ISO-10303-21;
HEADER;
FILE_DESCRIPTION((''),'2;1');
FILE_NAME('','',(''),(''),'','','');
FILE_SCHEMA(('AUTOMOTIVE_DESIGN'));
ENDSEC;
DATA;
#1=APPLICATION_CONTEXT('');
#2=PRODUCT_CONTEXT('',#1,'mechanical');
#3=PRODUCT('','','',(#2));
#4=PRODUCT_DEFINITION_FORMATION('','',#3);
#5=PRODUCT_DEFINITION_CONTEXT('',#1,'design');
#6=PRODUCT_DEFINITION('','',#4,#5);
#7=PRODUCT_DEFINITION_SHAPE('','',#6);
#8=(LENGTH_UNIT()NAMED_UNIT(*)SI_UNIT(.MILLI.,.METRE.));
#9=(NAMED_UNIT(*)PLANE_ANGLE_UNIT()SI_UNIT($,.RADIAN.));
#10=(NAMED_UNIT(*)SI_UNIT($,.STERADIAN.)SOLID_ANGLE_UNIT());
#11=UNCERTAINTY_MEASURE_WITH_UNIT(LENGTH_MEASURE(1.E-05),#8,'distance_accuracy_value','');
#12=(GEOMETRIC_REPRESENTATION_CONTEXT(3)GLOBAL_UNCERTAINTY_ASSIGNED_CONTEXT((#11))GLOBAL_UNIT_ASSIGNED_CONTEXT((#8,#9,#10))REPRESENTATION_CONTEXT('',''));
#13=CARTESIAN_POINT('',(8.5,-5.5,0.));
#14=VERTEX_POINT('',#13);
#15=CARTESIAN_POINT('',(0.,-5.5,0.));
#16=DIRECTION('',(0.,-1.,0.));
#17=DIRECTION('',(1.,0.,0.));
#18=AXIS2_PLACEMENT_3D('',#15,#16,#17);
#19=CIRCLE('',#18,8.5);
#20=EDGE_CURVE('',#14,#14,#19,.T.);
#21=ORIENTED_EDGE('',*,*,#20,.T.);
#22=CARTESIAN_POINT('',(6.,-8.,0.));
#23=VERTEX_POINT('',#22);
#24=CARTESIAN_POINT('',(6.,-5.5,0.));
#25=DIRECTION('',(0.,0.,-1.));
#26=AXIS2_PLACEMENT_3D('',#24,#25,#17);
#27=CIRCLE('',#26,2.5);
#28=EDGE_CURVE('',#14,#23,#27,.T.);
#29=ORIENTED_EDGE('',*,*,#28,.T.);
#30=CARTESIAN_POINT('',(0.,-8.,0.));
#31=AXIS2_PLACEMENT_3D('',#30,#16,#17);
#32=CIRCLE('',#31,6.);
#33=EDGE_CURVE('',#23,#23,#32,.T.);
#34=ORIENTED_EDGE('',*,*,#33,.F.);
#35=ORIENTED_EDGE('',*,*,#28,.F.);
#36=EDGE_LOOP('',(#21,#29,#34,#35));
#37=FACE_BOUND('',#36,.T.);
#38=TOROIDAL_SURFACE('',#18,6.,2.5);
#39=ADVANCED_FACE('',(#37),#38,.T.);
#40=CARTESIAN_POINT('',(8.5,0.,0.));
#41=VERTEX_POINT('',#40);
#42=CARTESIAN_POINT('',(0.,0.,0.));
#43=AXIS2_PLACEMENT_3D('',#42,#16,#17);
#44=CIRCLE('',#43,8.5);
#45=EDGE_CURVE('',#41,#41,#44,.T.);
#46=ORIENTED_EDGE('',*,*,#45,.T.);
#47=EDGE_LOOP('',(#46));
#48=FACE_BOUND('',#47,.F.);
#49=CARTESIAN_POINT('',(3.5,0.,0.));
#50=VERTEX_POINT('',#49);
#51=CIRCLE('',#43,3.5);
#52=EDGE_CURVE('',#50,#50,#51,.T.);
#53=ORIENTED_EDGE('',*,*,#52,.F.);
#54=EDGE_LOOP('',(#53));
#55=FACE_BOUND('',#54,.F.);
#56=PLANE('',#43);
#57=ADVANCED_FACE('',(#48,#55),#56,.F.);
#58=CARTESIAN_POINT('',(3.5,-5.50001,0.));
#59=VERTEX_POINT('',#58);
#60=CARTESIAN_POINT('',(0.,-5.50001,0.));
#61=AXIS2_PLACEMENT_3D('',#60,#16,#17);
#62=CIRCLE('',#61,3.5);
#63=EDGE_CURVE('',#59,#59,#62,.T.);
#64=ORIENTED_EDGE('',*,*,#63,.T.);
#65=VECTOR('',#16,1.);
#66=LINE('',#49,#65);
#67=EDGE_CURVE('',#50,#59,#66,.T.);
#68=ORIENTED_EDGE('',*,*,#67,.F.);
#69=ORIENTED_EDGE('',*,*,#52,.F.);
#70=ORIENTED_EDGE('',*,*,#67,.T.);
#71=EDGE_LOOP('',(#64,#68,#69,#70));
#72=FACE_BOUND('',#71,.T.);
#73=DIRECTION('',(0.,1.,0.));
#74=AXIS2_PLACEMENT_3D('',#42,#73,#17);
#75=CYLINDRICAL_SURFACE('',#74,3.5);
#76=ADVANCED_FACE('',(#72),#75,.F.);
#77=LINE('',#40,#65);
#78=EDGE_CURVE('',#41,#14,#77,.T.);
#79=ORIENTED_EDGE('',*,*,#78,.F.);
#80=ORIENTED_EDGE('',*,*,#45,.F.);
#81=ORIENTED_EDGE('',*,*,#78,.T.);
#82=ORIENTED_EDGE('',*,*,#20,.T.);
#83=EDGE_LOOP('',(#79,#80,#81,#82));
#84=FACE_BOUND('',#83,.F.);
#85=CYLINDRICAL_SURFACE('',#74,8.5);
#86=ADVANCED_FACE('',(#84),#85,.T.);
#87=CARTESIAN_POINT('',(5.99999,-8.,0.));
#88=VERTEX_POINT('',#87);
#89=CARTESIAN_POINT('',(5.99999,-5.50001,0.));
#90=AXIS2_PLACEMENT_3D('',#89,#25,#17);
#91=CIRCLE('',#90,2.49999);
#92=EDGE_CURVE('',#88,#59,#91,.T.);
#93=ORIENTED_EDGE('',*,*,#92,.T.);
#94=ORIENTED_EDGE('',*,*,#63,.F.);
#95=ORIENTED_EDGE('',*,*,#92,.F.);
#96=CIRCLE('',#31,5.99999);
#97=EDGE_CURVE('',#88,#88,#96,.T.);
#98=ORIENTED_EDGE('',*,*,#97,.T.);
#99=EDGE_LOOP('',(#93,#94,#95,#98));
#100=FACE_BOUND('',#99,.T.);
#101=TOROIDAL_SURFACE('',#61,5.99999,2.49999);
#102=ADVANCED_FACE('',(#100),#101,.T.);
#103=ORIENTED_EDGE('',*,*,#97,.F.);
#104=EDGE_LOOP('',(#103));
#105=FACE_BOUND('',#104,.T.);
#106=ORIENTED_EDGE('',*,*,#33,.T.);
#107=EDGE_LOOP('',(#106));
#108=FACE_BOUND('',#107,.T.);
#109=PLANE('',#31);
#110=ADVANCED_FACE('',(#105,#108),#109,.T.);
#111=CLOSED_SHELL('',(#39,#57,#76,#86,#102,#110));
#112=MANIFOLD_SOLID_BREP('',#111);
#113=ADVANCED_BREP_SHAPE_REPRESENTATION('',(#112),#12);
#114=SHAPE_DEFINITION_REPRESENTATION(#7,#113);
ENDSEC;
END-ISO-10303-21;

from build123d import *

# Parameters (mm, degrees)
F0_R     = 8.5
F0_R_2   = 3.5
F1_DEPTH = 8
F2_R     = 2.5
F3_R     = 2.49999


# Not quite as in the source:
# - a fillet or chamfer is up to 0.001 mm smaller than in the source, because OpenCascade refuses the exact size


with BuildPart() as f1:
    # F0 (on Front) → F1 (new body)
    with BuildSketch(Plane.XZ):
        Circle(F0_R)
        Circle(F0_R_2, mode=Mode.SUBTRACT)
    extrude(amount=F1_DEPTH)

    # F2
    f2_edges = [f1.edges().sort_by_distance(p)[0] for p in [
        (-8.5, -8, 0),
    ]]
    fillet(f2_edges, radius=F2_R)

    # F3 (radius 2.5 in the source; OpenCascade refuses exactly that, so slightly less here)
    f3_edges = [f1.edges().sort_by_distance(p)[0] for p in [
        (-3.5, -8, 0),
    ]]
    fillet(f3_edges, radius=F3_R)


solid = f1.part
